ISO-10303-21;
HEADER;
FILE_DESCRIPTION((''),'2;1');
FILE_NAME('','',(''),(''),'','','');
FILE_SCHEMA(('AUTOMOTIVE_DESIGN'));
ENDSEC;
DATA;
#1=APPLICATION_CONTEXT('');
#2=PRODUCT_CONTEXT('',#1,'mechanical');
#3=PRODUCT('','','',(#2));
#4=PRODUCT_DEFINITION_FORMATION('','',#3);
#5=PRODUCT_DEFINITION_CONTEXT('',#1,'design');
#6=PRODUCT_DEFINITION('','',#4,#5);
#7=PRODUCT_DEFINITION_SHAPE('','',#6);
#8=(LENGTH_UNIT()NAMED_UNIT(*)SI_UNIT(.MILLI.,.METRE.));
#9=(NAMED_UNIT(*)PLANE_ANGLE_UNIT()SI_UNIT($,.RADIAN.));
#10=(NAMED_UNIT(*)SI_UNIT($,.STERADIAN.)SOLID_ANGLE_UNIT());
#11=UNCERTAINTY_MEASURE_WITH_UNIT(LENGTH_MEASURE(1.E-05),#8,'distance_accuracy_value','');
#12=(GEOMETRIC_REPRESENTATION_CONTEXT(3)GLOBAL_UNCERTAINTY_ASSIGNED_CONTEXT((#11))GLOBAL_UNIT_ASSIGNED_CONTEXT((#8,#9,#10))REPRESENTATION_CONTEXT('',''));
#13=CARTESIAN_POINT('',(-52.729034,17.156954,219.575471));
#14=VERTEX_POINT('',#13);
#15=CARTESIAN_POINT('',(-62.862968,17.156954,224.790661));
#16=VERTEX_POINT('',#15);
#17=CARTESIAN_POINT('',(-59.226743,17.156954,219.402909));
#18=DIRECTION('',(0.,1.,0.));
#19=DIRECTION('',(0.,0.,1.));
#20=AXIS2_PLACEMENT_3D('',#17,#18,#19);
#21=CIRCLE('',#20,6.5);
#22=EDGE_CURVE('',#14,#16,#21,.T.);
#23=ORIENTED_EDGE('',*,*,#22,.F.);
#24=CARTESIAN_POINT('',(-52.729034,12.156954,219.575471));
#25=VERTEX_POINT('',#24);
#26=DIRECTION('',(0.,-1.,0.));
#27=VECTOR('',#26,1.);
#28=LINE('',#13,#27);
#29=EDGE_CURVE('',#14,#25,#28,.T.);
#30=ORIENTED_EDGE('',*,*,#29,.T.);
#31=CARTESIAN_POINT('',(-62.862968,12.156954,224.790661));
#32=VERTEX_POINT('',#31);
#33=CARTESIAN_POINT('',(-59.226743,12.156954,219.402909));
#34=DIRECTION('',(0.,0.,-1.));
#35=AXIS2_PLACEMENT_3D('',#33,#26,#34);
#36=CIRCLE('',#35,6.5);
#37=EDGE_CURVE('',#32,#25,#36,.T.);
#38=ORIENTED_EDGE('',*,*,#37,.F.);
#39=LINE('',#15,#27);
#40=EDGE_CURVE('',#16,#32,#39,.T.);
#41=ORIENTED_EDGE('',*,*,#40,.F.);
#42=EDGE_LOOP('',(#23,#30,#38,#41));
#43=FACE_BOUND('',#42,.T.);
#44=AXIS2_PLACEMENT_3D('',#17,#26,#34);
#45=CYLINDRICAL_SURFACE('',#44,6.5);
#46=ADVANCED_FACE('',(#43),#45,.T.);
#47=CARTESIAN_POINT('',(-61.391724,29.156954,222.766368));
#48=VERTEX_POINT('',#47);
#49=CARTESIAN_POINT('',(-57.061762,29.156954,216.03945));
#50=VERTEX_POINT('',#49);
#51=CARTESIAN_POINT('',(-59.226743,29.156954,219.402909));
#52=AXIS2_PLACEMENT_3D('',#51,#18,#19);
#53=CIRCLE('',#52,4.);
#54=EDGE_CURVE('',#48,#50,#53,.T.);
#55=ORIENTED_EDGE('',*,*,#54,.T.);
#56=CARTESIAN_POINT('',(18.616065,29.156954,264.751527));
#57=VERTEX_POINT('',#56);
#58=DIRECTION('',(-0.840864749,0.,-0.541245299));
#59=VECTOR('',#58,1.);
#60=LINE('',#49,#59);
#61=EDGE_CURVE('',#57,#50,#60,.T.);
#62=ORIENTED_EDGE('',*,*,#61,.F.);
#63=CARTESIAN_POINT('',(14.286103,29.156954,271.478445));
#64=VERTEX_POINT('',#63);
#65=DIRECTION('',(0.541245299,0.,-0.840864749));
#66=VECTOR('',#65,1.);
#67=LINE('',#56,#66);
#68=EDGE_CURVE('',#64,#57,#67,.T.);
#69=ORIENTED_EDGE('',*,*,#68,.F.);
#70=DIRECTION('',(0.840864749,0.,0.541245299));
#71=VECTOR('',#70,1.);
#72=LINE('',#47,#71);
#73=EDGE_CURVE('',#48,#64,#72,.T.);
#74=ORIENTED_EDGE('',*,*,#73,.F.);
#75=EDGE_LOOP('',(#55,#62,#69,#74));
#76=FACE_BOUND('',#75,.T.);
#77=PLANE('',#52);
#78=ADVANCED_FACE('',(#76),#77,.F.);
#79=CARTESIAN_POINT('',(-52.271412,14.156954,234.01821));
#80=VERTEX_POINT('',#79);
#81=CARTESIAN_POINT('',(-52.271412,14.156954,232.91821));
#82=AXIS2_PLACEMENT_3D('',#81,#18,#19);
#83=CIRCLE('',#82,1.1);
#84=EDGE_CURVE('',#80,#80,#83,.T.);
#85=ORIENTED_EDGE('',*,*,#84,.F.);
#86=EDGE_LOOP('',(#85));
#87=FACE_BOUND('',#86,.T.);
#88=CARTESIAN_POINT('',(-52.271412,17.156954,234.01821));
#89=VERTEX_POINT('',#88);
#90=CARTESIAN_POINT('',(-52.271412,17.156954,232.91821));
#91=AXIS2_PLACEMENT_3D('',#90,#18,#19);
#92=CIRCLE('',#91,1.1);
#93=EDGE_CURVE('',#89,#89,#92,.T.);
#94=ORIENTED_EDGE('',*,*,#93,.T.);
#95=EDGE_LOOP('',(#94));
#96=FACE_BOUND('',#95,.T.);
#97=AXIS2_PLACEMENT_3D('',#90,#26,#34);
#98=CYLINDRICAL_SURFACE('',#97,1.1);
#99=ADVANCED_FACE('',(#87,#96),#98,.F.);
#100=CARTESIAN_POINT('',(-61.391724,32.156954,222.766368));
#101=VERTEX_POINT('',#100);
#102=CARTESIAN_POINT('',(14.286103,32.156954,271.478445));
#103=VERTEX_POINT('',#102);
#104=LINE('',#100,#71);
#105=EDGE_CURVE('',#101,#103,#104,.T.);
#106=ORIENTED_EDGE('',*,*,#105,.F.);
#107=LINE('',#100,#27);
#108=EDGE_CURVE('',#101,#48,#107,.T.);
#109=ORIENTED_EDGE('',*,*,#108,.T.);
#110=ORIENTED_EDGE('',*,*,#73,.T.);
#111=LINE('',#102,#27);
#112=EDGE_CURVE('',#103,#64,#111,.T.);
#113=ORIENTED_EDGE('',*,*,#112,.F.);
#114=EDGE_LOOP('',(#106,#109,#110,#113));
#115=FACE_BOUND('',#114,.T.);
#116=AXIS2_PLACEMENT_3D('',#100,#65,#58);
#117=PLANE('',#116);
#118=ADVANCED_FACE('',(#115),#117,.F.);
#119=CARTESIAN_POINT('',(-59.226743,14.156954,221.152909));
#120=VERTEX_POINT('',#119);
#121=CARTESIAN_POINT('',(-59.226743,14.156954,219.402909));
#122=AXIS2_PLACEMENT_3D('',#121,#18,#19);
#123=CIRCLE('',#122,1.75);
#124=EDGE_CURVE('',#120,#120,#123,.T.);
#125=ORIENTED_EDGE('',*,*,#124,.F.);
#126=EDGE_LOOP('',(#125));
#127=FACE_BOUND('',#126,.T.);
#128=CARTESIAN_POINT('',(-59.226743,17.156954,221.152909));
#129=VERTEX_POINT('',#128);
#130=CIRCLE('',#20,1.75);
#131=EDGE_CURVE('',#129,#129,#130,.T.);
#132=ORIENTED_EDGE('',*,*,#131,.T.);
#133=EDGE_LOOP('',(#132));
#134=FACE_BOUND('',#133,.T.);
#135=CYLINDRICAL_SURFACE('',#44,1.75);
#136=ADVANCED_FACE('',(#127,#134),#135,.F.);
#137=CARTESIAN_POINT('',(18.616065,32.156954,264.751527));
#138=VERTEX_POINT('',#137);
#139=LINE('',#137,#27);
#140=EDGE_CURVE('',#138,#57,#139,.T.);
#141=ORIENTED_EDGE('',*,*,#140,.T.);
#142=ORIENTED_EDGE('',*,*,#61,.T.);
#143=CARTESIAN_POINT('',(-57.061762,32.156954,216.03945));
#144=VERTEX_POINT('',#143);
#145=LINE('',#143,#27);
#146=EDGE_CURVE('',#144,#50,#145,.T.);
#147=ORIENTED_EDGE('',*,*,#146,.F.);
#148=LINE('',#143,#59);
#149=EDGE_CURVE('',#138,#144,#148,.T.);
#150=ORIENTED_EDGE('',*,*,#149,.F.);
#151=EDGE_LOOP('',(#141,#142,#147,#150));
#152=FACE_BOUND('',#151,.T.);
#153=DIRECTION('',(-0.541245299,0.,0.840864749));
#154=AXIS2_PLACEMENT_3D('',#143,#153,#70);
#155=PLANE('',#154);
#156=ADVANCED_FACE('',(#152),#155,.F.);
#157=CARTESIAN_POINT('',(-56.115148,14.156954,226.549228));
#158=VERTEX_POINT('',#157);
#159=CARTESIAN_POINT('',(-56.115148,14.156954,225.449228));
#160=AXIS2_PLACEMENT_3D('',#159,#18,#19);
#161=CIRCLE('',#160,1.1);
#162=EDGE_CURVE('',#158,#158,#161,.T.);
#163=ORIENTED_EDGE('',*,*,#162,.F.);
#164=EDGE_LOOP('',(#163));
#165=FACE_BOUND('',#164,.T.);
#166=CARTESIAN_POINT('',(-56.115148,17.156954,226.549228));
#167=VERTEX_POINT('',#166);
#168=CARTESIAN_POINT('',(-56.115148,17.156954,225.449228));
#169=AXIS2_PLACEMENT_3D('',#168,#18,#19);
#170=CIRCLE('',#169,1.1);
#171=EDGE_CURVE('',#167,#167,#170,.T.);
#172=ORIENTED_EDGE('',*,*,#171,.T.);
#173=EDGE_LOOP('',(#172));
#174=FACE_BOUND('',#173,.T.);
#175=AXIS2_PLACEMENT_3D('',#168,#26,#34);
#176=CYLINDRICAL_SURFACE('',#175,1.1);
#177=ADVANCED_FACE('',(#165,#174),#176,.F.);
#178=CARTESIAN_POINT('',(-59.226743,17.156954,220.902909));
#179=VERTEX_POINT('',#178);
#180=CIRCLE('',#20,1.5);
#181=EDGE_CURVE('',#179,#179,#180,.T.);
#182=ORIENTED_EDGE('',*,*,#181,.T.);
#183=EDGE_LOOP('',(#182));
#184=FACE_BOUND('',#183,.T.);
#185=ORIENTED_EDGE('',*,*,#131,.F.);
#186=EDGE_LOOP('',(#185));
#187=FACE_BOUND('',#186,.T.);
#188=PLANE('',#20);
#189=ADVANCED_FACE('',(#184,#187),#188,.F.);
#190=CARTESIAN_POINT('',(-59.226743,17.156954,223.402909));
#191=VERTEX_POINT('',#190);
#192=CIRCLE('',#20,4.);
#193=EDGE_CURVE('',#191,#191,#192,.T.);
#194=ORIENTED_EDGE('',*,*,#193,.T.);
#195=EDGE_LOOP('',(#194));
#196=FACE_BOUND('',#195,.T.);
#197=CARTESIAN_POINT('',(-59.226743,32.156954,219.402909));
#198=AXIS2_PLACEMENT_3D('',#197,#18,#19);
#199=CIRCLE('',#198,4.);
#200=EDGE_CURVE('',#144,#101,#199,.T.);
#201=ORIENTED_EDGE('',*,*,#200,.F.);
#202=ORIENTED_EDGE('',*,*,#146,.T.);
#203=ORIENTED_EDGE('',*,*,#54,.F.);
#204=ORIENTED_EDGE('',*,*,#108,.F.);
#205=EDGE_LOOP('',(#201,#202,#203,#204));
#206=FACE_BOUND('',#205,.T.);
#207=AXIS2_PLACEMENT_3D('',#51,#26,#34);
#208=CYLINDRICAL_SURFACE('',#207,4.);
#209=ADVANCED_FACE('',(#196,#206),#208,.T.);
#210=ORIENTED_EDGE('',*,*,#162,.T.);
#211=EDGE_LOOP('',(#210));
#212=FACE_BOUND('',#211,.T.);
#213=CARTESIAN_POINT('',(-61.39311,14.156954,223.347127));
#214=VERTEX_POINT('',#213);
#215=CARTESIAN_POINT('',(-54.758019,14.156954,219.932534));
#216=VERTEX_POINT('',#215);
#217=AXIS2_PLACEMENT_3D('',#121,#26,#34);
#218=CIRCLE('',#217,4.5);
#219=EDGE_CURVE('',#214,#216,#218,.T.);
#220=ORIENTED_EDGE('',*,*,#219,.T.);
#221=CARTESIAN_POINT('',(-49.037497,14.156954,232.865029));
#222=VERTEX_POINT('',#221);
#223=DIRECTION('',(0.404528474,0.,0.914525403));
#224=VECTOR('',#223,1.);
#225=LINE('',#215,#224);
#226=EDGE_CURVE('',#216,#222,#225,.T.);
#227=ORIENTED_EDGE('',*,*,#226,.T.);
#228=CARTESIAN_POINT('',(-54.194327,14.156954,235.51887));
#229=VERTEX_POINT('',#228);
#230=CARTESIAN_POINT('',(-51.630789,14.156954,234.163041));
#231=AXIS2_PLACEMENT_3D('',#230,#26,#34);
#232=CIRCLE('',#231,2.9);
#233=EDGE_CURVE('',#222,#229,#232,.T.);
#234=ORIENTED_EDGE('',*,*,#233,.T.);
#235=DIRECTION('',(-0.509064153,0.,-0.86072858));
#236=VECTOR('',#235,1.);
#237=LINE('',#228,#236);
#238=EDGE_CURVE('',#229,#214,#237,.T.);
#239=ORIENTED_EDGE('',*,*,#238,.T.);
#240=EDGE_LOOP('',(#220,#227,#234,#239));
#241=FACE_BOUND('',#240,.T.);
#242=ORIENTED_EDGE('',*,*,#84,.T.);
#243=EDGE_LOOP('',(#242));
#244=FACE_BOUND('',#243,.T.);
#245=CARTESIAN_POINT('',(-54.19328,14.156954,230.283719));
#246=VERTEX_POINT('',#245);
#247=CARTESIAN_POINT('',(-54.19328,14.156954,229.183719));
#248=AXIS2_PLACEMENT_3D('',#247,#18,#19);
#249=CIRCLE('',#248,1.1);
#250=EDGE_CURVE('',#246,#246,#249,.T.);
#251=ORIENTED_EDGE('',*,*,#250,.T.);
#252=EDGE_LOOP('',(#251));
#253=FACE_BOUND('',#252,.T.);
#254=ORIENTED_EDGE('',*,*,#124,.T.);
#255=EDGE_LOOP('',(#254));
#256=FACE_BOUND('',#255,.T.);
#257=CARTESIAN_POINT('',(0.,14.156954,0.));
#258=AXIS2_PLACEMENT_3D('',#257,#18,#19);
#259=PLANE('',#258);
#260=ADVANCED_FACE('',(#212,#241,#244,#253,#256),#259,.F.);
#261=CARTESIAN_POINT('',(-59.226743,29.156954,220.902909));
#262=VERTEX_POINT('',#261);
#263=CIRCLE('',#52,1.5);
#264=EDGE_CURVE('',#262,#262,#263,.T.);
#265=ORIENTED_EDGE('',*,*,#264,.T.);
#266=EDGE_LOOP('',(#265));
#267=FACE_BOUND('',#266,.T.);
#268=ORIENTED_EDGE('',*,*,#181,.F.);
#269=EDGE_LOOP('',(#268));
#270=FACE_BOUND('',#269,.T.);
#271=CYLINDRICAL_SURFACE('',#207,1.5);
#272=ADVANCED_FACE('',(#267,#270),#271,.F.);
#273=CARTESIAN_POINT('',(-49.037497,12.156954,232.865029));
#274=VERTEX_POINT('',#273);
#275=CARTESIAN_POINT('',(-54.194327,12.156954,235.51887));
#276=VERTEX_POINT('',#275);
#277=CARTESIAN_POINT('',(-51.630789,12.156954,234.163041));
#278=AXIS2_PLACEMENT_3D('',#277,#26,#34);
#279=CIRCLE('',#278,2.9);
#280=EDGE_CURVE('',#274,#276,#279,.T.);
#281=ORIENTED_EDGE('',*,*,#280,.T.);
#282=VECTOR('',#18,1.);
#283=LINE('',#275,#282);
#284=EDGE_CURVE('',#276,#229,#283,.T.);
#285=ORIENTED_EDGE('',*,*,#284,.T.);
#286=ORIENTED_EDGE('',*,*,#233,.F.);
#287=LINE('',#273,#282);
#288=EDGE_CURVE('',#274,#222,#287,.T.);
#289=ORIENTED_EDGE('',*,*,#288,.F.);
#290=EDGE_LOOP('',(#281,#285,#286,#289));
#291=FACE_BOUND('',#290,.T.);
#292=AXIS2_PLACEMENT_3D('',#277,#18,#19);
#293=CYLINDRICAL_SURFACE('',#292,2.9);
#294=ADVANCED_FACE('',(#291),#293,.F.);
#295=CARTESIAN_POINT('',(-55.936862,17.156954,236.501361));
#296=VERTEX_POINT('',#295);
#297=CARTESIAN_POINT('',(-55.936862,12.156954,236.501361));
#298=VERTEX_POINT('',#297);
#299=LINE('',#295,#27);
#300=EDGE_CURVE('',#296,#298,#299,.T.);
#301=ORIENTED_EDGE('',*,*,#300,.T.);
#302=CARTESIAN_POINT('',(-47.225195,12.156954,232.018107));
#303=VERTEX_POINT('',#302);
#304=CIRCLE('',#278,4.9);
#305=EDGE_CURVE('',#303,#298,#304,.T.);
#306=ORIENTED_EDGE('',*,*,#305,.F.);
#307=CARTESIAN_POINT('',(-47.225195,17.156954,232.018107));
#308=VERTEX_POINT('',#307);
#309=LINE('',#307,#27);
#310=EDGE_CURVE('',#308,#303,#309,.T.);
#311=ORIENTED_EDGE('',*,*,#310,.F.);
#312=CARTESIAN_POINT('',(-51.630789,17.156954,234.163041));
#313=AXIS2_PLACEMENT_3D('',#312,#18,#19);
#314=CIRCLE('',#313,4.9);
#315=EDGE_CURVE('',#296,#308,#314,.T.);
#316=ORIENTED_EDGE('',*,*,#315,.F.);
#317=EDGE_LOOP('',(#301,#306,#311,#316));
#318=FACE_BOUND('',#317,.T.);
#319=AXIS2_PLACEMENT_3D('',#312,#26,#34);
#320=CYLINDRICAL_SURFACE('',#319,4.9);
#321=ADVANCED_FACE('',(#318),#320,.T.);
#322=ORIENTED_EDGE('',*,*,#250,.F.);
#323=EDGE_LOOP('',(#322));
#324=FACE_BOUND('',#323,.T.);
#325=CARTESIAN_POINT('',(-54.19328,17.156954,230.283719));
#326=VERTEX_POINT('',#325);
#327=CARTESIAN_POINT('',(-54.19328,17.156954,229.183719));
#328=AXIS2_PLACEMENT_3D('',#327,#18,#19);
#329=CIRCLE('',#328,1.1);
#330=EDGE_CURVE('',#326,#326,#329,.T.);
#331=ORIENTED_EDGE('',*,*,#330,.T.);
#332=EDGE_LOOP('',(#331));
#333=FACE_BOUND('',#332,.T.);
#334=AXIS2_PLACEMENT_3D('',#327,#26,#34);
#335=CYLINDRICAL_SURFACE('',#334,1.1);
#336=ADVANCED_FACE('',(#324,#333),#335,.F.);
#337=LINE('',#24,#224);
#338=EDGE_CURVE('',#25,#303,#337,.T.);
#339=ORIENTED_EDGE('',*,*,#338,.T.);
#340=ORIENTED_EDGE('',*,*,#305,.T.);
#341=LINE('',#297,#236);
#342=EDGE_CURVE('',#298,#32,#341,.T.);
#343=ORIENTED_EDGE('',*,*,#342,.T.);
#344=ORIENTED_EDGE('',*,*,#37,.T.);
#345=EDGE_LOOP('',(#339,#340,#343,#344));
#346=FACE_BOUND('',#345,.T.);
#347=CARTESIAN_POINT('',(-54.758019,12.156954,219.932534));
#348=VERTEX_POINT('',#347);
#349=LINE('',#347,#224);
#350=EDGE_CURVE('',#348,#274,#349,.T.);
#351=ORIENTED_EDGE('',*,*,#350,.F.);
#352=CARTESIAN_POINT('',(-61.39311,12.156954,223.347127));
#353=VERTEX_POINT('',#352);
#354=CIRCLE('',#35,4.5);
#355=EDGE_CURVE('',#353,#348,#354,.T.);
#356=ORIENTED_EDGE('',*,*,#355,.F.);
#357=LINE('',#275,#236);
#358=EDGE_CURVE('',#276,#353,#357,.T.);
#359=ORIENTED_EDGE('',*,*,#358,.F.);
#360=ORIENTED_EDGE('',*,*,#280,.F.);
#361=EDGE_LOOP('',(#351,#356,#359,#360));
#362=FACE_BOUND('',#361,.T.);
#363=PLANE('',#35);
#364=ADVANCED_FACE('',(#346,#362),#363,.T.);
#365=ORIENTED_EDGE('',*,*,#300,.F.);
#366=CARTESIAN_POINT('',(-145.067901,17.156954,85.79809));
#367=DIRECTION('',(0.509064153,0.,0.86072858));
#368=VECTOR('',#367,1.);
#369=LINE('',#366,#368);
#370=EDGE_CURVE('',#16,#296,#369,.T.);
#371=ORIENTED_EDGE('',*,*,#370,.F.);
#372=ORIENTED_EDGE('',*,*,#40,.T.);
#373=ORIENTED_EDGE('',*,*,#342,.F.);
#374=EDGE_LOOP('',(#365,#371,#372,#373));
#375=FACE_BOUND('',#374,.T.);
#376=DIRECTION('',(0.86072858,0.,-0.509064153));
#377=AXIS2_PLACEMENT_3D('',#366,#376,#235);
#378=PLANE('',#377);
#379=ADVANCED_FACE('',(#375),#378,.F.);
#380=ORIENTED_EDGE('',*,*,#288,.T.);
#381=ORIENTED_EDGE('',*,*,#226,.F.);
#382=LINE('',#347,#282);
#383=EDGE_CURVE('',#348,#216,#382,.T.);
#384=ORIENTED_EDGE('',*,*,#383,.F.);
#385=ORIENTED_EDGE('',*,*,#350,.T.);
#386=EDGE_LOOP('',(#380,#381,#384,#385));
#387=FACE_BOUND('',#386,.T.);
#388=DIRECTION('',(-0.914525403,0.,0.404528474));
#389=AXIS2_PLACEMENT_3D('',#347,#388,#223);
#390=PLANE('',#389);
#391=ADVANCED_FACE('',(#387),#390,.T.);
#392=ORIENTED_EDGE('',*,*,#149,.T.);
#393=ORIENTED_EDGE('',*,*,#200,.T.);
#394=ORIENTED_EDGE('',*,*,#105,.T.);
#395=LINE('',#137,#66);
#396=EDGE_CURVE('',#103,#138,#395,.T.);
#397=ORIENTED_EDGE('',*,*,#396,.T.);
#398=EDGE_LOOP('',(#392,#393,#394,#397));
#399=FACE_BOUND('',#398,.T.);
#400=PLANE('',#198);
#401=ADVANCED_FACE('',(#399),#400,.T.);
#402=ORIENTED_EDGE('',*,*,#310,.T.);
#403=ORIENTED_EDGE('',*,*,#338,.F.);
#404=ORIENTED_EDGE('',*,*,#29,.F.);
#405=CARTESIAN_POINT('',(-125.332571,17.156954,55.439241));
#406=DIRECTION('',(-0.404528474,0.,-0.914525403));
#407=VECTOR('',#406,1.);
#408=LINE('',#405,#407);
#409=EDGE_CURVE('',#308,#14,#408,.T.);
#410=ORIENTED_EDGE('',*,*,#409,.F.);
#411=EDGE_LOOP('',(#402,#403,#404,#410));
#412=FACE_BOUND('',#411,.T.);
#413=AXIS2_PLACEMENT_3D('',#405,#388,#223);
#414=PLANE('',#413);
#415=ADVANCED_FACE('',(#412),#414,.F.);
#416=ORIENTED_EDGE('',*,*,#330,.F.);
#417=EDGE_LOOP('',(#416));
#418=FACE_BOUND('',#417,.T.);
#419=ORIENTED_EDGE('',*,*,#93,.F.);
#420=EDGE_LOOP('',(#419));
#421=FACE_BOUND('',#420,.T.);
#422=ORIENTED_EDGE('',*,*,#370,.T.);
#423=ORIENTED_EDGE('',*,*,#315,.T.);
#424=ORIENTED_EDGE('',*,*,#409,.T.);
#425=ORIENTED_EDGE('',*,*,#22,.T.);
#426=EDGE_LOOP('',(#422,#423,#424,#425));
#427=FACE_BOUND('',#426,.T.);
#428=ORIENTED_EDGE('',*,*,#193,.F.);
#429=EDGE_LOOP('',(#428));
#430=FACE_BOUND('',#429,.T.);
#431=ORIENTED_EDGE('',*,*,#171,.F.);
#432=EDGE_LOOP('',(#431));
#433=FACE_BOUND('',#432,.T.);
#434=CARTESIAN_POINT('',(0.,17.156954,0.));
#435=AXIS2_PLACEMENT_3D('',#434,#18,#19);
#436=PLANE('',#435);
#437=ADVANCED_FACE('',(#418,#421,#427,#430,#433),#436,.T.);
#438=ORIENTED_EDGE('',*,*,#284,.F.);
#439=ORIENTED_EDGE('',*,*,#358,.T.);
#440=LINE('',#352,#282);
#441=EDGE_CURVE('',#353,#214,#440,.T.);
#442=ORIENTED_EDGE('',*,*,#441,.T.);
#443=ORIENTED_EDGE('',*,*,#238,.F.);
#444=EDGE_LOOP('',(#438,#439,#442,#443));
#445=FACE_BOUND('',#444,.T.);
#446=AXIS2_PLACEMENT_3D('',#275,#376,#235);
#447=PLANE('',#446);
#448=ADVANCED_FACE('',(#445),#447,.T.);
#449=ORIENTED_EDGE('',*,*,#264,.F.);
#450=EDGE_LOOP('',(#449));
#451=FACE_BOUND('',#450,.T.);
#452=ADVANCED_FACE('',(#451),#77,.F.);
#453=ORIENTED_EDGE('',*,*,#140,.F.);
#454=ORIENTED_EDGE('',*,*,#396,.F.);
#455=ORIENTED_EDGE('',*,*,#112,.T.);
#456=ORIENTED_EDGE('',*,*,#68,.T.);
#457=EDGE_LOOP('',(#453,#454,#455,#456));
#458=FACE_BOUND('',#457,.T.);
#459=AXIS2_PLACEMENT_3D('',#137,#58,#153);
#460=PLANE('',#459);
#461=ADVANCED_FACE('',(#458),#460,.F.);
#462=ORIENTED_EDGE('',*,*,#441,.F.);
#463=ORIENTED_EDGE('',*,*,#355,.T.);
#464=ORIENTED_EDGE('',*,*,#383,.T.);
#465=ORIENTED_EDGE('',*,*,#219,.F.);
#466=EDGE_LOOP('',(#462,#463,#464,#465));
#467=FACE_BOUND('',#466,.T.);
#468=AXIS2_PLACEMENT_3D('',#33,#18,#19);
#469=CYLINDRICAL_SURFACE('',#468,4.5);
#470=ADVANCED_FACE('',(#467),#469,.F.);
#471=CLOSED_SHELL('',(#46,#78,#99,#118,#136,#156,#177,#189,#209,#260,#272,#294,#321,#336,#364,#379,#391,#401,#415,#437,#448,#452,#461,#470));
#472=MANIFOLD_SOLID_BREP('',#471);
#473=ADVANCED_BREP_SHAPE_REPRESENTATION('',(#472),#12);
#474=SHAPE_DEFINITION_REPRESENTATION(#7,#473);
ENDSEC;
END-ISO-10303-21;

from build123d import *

# Parameters (mm, degrees)
EXTRUDE_4_OUTLINE_R   = 1.1
EXTRUDE_4_OUTLINE_R_2 = 1.75
EXTRUDE_4_DEPTH       = 3
EXTRUDE_START         = 2
EXTRUDE_5_DEPTH       = 2
SKETCH_3_R            = 4
SKETCH_3_R_2          = 1.5
EXTRUDE_6_DEPTH       = 12
EXTRUDE_7_DEPTH       = 3


# Read off the part's stored shape, not the designer's step: 填料-伸長4
with BuildPart() as part:
    # 填料-伸長4 outline → 填料-伸長4 (new body)
    with BuildSketch(Plane(origin=(0, 14.156954032, 0), x_dir=(1, 0, 0), z_dir=(0, 1, 0))):
        with BuildLine():
            Line((-47.225195315, -232.018106976), (-52.72903426, -219.575471046))
            ThreePointArc((-52.72903426, -219.575471046), (-62.201062568, -213.623339578), (-62.862967802, -224.790661134))
            Line((-62.862967802, -224.790661134), (-55.936861757, -236.501360817))
            ThreePointArc((-55.936861757, -236.501360817), (-49.388610218, -238.519947074), (-47.225195315, -232.018106976))
        make_face()
        with Locations((-52.271411996, -232.918210387)):
            Circle(EXTRUDE_4_OUTLINE_R, mode=Mode.SUBTRACT)
        with Locations((-54.193279849, -229.183719263)):
            Circle(EXTRUDE_4_OUTLINE_R, mode=Mode.SUBTRACT)
        with Locations((-59.226743272, -219.402909175)):
            Circle(EXTRUDE_4_OUTLINE_R_2, mode=Mode.SUBTRACT)
        with Locations((-56.115147701, -225.449228139)):
            Circle(EXTRUDE_4_OUTLINE_R, mode=Mode.SUBTRACT)
    extrude(amount=EXTRUDE_4_DEPTH)

    # 草圖2 → 填料-伸長5 (add)
    with BuildSketch(Plane.XZ.offset(-14.156954032).offset(EXTRUDE_START)):
        with BuildLine():
            Line((-52.72903426, 219.575471046), (-47.225195315, 232.018106976))
            ThreePointArc((-47.225195315, 232.018106976), (-49.388610218, 238.519947074), (-55.936861757, 236.501360817))
            Line((-55.936861757, 236.501360817), (-62.862967802, 224.790661134))
            ThreePointArc((-62.862967802, 224.790661134), (-62.201062567, 213.623339578), (-52.72903426, 219.575471046))
        make_face()
        with BuildLine():
            Line((-54.758018868, 219.932533757), (-49.037497118, 232.865028725))
            ThreePointArc((-49.037497118, 232.865028725), (-50.303785386, 236.741617967), (-54.194327422, 235.518869919))
            Line((-54.194327422, 235.518869919), (-61.393110067, 223.347127084))
            ThreePointArc((-61.393110067, 223.347127084), (-61.2858874, 215.401668685), (-54.758018868, 219.932533757))
        make_face(mode=Mode.SUBTRACT)
    extrude(amount=-EXTRUDE_5_DEPTH)

    # 草圖3 → 填料-伸長6 (add)
    with BuildSketch(Plane(origin=(0, 17.156954032, 0), x_dir=(1, 0, 0), z_dir=(0, 1, 0))):
        with Locations(Location((-59.226743272, -219.402909175, 0), (0, 0, 270))):
            Circle(SKETCH_3_R)
        with Locations(Location((-59.226743272, -219.402909175, 0), (0, 0, 270))):
            Circle(SKETCH_3_R_2, mode=Mode.SUBTRACT)
    extrude(amount=EXTRUDE_6_DEPTH)

    # 草圖4 → 填料-伸長7 (add)
    with BuildSketch(Plane(origin=(0, 29.156954032, 0), x_dir=(1, 0, 0), z_dir=(0, 1, 0))):
        with BuildLine():
            Line((-57.061762074, -216.03945018), (18.616065321, -264.75152713))
            Line((18.616065321, -264.75152713), (14.286102925, -271.478445121))
            Line((14.286102925, -271.478445121), (-61.39172447, -222.766368171))
            ThreePointArc((-61.39172447, -222.766368171), (-62.590202267, -217.237927978), (-57.061762074, -216.03945018))
        make_face()
    extrude(amount=EXTRUDE_7_DEPTH)


solid = part.part
